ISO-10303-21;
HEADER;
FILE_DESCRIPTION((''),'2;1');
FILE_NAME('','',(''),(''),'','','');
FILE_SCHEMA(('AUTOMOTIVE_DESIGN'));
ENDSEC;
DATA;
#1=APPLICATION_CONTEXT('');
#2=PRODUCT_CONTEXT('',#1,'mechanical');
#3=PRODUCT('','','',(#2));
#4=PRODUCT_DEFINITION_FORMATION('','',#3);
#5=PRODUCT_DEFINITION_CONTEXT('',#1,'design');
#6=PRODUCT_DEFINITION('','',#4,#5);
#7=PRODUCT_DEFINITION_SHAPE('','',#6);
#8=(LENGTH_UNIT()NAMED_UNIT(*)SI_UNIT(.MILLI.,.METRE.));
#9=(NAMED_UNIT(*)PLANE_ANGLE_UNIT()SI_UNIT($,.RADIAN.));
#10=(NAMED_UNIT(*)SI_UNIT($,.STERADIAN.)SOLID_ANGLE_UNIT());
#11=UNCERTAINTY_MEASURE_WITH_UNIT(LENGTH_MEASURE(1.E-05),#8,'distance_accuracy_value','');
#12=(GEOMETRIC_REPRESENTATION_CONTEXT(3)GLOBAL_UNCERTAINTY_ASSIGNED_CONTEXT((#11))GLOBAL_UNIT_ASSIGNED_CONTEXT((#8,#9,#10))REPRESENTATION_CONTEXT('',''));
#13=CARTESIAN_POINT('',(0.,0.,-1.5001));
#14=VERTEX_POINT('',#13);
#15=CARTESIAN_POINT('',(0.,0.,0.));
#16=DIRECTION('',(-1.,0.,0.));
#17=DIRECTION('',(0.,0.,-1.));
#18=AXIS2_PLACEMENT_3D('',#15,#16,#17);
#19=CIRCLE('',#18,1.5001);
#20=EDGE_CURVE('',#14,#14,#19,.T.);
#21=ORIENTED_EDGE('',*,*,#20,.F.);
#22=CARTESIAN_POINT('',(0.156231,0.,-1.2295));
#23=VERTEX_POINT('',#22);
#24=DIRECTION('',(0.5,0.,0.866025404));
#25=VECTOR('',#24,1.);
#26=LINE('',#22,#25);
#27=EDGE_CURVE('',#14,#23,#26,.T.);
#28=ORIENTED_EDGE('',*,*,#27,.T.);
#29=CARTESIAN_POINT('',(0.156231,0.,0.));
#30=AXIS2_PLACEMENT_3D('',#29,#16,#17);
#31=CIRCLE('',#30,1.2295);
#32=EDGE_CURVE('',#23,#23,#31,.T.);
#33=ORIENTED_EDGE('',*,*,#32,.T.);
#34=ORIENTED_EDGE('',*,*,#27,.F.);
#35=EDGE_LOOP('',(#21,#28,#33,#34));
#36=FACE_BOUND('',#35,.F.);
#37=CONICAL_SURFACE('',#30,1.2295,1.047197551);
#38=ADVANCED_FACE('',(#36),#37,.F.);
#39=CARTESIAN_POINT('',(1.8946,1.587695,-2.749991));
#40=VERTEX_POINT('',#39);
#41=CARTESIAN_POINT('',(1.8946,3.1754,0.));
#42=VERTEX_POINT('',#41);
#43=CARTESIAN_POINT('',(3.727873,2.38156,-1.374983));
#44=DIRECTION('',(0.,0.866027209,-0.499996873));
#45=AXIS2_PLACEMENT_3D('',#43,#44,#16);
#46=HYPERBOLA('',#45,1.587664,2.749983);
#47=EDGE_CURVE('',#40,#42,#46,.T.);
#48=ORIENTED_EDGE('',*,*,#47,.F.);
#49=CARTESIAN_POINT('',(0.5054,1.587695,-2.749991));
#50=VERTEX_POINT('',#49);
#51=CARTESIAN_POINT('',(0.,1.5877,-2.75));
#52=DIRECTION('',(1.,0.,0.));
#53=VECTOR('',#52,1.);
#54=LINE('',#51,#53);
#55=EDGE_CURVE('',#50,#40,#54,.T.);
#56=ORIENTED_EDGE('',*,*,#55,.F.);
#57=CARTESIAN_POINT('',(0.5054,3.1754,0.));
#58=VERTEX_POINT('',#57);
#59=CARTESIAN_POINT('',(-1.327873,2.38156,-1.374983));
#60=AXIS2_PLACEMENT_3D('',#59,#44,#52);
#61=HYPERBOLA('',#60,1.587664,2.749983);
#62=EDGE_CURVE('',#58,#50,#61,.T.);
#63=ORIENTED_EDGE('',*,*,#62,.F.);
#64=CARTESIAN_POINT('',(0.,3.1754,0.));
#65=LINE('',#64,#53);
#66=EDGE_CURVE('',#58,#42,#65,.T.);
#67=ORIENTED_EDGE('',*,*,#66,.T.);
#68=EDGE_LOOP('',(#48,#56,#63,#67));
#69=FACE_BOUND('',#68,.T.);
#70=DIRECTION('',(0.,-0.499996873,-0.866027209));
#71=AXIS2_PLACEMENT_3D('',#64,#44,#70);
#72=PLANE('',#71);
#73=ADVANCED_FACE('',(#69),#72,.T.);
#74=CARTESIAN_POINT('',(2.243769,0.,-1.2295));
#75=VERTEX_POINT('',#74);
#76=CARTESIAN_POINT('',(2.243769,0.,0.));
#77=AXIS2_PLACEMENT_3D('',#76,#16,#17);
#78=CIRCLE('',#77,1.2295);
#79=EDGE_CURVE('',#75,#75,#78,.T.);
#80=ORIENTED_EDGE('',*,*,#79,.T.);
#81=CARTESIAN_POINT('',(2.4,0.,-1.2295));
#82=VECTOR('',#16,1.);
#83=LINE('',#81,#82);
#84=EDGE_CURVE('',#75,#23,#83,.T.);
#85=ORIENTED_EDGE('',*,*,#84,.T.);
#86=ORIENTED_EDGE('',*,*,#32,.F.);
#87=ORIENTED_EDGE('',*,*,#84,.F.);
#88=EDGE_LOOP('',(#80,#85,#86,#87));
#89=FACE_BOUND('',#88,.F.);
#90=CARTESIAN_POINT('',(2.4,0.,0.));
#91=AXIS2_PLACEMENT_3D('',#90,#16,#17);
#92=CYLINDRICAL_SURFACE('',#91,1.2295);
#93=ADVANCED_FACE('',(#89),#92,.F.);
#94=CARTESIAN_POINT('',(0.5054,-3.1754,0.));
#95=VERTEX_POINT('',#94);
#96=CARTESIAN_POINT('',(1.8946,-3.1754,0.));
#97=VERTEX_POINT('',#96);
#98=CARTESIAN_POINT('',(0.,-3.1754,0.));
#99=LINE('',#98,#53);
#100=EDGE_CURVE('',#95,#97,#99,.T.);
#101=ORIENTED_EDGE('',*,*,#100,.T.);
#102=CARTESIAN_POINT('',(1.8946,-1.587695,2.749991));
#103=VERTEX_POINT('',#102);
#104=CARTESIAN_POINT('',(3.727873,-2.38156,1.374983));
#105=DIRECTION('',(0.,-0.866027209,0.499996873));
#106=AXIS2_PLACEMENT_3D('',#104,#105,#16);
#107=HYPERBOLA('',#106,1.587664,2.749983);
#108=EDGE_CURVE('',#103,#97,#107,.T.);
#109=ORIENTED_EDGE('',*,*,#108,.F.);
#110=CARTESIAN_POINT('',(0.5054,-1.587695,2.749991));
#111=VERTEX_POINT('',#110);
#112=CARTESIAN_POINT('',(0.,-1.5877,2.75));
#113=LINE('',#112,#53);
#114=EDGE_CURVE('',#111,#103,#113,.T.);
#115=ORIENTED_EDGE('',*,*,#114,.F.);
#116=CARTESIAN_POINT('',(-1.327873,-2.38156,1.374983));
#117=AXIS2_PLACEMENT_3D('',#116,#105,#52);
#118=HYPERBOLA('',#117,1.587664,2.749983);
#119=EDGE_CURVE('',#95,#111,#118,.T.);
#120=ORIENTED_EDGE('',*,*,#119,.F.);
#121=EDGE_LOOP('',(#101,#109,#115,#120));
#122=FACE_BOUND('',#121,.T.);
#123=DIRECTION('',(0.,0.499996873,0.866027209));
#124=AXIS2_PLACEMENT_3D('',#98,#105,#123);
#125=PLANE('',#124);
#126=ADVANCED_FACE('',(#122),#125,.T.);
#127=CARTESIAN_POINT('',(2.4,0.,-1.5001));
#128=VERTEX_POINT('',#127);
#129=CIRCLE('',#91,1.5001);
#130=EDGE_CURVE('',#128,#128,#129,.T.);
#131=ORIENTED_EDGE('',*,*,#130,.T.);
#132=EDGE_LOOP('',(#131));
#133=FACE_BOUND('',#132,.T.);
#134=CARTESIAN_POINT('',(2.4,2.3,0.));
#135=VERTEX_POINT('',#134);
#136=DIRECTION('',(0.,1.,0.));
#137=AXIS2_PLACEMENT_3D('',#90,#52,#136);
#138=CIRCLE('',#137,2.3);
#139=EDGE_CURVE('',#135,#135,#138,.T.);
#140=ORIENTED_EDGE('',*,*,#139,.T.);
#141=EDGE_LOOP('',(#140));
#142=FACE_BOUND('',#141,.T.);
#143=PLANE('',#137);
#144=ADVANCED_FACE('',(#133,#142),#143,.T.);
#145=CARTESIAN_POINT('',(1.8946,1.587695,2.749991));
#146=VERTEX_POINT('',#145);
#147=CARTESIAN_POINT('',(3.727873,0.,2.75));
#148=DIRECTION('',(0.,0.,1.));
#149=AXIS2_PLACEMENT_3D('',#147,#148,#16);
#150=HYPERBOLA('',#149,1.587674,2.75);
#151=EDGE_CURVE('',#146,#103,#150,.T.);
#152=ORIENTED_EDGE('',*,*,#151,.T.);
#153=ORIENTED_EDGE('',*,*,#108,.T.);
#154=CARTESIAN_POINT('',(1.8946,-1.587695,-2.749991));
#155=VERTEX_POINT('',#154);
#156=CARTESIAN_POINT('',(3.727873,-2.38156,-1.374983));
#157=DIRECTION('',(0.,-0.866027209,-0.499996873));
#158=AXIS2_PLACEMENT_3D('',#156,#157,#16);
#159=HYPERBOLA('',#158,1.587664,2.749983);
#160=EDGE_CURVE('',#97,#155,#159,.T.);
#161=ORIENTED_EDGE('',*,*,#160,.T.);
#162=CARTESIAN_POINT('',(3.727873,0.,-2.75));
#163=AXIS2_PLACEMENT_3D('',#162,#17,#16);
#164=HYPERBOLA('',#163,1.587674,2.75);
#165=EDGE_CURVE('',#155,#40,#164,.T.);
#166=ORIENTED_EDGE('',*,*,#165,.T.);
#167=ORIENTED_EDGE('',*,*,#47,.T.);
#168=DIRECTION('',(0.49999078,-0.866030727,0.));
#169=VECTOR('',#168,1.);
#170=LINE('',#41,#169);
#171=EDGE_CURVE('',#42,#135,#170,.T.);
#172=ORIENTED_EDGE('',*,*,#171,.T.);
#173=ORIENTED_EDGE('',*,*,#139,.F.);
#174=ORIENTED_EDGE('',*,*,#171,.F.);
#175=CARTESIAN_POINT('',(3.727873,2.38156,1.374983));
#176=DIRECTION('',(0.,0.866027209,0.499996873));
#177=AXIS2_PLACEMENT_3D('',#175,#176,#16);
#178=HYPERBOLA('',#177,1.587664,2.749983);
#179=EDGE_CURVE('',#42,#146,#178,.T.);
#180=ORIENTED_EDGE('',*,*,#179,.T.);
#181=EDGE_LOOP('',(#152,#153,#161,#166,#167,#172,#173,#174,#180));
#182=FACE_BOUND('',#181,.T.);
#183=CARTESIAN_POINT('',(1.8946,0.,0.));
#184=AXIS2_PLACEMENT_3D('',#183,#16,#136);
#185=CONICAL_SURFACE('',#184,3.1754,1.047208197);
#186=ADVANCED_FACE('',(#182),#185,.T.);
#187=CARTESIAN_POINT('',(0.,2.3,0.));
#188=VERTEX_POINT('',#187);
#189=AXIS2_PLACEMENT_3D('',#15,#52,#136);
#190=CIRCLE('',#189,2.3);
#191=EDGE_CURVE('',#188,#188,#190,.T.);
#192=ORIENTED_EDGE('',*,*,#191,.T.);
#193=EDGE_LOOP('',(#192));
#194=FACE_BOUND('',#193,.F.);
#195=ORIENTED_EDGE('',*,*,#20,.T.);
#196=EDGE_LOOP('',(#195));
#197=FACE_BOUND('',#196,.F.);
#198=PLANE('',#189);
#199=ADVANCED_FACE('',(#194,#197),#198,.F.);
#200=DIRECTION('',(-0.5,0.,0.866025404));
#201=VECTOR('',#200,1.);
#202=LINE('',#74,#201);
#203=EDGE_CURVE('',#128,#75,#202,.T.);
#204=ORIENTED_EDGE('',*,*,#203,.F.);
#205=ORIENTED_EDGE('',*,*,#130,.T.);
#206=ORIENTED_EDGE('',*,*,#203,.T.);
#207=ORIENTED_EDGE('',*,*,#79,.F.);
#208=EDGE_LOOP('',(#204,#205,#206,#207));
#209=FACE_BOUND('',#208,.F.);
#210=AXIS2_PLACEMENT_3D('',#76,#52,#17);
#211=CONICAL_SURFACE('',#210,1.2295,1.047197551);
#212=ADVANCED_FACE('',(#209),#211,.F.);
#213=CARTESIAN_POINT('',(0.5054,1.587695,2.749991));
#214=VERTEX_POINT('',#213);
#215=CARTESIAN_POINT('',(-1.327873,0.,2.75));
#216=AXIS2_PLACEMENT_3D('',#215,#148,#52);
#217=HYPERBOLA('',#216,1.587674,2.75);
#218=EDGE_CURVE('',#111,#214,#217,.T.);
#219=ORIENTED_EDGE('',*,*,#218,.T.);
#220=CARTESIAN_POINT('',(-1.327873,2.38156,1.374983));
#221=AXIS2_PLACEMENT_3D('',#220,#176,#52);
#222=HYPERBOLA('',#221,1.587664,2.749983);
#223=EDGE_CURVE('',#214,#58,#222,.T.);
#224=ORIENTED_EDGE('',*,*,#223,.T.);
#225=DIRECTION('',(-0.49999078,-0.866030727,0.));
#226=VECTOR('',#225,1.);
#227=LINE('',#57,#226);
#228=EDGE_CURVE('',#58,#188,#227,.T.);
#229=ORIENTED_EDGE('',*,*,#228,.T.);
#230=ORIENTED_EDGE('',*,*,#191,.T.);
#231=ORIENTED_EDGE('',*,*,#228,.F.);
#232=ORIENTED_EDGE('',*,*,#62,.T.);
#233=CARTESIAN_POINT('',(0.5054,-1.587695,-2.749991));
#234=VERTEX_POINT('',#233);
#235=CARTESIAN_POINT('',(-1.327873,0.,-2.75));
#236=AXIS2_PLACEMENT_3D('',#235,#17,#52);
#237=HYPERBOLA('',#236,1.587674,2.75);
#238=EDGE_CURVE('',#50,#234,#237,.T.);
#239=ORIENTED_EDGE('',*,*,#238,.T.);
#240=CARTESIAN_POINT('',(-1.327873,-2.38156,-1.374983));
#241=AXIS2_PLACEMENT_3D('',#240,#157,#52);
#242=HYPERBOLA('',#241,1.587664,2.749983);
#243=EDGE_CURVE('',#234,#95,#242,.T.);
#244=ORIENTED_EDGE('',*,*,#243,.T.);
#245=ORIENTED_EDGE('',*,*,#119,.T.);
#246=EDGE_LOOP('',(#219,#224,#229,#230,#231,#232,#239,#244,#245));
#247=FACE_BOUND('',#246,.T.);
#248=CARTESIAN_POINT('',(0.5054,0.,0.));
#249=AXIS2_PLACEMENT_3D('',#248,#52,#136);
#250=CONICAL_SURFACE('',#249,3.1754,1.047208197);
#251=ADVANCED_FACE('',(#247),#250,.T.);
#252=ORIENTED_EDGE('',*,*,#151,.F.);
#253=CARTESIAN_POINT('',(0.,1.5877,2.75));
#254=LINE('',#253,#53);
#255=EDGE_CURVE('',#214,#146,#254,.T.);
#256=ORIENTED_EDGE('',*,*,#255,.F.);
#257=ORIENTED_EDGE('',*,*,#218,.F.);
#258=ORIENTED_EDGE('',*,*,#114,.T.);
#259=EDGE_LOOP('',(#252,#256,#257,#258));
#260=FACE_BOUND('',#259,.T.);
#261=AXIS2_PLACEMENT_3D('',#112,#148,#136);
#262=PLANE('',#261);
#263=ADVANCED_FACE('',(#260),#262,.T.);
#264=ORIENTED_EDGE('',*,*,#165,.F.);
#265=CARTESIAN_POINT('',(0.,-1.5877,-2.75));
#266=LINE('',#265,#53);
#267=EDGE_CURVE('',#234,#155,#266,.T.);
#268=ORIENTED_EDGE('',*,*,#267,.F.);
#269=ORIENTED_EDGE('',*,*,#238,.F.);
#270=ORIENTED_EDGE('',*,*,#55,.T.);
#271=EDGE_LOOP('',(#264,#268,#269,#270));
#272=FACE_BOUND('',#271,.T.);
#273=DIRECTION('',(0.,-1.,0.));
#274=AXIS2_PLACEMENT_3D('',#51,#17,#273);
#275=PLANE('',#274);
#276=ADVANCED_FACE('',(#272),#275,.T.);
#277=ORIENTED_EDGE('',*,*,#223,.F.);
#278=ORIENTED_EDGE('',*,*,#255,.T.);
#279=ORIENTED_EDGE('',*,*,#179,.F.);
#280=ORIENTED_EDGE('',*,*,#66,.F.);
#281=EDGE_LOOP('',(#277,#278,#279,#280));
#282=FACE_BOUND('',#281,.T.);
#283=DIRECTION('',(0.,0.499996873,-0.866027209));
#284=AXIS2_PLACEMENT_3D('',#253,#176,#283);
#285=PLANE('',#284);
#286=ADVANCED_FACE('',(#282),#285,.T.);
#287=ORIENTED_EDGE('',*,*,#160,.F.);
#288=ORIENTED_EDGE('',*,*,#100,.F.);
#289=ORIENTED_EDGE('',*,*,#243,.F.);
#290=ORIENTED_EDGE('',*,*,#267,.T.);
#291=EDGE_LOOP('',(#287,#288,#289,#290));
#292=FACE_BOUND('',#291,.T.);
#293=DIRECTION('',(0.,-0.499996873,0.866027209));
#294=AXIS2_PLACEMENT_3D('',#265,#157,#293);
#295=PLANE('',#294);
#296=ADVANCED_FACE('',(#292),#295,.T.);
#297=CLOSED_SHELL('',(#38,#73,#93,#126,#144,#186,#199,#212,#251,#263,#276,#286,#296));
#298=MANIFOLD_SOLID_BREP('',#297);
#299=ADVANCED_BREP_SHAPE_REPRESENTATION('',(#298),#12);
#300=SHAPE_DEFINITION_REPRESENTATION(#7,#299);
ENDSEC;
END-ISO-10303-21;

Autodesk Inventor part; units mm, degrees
ref_plane "YZ Plane" through (0, 0, 0) normal (1, 0, 0) x (0, 1, 0)
ref_plane "XZ Plane" through (0, 0, 0) normal (0, 1, 0) x (-1, 0, 0)
sketch "Skizze1" plane through (0, 0, 0) normal (1, 0, 0) x (0, 1, 0)
  line L0 (-3.1754, 0) -> (-1.5877, 2.75)
  line L1 (-1.5877, 2.75) -> (1.5877, 2.75)
  line L2 (1.5877, 2.75) -> (3.1754, 0)
  line L3 (3.1754, 0) -> (1.5877, -2.75)
  line L4 (1.5877, -2.75) -> (-1.5877, -2.75)
  line L5 (-1.5877, -2.75) -> (-3.1754, 0)
  point P0 (0, 0)
  point P1 (0, 0)
  dimension "d0" = 6.3509
extrude "Körper" add sketch "Skizze1" along normal blind 2.4
sketch "Skizze2" plane through (0, 0, 0) normal (0, 0, 1) x (1, 0, 0)
  line L0 (0, 1.5877) -> (0, 3.1754) projected
  line L1 (0, 3.1754) -> (2.4, 3.1754) projected
  line L2 (2.4, 1.5877) -> (2.4, 3.1754) projected
  line L3 (-0.48, 0) -> (2.88, 0) projected
  line L4 (0.5054, 3.1754) -> (0, 2.3)
  line L5 (1.8946, 3.1754) -> (2.4, 2.3)
  dimension "d3" = 30
  dimension "d4" = 30
  dimension "d5" = 4.6
  dimension "d6" = 4.6
revolve "Fase1" cut sketch "Skizze2" angle 360 about axis through (-10, 0, 0) along (1, 0, 0)
sketch "Skizze3" plane through (2.4, 0, 0) normal (1, 0, 0) x (0, 0, -1)
  arc A0 (-0.625, -1.0825) -> (0.625, -1.0825) centre (0, 0) ccw projected
hole "Gewinde" at (2.4, 0, 0) direction (-1, 0, 0) diameter 2.459 end through all thread size "M3x0.5" class "6H" standard "ISO Metric profile"
chamfer "Fase2" distance 0.2706 angle 30 1 edges at (2.4, 0, 1.2295) measured on face at (2.4, 1.9179, -0.2329)
chamfer "Fase3" distance 0.2706 angle 30 1 edges at (0, 0, 1.2295) measured on face at (0, 1.9179, -0.2329)
ref_plane "Work Plane1" through (-6.3375, 0, 0) normal (0, -0.8660254, -0.5) x (1, 0, 0)
equation "\"d0\" = 1.1547 * SW"
equation "\"d1\" = KOH"
equation "\"d3\" = ANG1"
equation "\"d4\" = ANG2"
equation "\"d5\" = SW0"
equation "\"d6\" = SW01"
equation "\"d8\" = -0.5 * GD1 + 0.5 * NND"
equation "\"d40\" = -0.5 * GD1 + 0.5 * NND"
equation "\"d10\" = -0.5 * GD1 + 0.5 * NND"
equation "\"d41\" = -0.5 * GD1 + 0.5 * NND"
equation "\"ANG1\" = 30deg"
equation "\"ANG2\" = 30deg"
equation "\"NND\" = 3"
equation "\"KOH\" = 2.4"
equation "\"SW\" = 5.5"
equation "\"SW0\" = 4.6"
equation "\"SW01\" = 4.6"
equation "\"GUL\" = 0.541266 * PTC"
equation "\"THREADDIA\" = 3"
equation "\"TOA\" = 30deg"
equation "\"PTC\" = 0.5"
equation "\"E0\" = 1.155 * SW"
equation "\"GAL\" = 0.541266 * PTC"
equation "\"GD1\" = 2.458734"
properties part number "ISO 4032 - M3" material "Edelstahl, 440C"
